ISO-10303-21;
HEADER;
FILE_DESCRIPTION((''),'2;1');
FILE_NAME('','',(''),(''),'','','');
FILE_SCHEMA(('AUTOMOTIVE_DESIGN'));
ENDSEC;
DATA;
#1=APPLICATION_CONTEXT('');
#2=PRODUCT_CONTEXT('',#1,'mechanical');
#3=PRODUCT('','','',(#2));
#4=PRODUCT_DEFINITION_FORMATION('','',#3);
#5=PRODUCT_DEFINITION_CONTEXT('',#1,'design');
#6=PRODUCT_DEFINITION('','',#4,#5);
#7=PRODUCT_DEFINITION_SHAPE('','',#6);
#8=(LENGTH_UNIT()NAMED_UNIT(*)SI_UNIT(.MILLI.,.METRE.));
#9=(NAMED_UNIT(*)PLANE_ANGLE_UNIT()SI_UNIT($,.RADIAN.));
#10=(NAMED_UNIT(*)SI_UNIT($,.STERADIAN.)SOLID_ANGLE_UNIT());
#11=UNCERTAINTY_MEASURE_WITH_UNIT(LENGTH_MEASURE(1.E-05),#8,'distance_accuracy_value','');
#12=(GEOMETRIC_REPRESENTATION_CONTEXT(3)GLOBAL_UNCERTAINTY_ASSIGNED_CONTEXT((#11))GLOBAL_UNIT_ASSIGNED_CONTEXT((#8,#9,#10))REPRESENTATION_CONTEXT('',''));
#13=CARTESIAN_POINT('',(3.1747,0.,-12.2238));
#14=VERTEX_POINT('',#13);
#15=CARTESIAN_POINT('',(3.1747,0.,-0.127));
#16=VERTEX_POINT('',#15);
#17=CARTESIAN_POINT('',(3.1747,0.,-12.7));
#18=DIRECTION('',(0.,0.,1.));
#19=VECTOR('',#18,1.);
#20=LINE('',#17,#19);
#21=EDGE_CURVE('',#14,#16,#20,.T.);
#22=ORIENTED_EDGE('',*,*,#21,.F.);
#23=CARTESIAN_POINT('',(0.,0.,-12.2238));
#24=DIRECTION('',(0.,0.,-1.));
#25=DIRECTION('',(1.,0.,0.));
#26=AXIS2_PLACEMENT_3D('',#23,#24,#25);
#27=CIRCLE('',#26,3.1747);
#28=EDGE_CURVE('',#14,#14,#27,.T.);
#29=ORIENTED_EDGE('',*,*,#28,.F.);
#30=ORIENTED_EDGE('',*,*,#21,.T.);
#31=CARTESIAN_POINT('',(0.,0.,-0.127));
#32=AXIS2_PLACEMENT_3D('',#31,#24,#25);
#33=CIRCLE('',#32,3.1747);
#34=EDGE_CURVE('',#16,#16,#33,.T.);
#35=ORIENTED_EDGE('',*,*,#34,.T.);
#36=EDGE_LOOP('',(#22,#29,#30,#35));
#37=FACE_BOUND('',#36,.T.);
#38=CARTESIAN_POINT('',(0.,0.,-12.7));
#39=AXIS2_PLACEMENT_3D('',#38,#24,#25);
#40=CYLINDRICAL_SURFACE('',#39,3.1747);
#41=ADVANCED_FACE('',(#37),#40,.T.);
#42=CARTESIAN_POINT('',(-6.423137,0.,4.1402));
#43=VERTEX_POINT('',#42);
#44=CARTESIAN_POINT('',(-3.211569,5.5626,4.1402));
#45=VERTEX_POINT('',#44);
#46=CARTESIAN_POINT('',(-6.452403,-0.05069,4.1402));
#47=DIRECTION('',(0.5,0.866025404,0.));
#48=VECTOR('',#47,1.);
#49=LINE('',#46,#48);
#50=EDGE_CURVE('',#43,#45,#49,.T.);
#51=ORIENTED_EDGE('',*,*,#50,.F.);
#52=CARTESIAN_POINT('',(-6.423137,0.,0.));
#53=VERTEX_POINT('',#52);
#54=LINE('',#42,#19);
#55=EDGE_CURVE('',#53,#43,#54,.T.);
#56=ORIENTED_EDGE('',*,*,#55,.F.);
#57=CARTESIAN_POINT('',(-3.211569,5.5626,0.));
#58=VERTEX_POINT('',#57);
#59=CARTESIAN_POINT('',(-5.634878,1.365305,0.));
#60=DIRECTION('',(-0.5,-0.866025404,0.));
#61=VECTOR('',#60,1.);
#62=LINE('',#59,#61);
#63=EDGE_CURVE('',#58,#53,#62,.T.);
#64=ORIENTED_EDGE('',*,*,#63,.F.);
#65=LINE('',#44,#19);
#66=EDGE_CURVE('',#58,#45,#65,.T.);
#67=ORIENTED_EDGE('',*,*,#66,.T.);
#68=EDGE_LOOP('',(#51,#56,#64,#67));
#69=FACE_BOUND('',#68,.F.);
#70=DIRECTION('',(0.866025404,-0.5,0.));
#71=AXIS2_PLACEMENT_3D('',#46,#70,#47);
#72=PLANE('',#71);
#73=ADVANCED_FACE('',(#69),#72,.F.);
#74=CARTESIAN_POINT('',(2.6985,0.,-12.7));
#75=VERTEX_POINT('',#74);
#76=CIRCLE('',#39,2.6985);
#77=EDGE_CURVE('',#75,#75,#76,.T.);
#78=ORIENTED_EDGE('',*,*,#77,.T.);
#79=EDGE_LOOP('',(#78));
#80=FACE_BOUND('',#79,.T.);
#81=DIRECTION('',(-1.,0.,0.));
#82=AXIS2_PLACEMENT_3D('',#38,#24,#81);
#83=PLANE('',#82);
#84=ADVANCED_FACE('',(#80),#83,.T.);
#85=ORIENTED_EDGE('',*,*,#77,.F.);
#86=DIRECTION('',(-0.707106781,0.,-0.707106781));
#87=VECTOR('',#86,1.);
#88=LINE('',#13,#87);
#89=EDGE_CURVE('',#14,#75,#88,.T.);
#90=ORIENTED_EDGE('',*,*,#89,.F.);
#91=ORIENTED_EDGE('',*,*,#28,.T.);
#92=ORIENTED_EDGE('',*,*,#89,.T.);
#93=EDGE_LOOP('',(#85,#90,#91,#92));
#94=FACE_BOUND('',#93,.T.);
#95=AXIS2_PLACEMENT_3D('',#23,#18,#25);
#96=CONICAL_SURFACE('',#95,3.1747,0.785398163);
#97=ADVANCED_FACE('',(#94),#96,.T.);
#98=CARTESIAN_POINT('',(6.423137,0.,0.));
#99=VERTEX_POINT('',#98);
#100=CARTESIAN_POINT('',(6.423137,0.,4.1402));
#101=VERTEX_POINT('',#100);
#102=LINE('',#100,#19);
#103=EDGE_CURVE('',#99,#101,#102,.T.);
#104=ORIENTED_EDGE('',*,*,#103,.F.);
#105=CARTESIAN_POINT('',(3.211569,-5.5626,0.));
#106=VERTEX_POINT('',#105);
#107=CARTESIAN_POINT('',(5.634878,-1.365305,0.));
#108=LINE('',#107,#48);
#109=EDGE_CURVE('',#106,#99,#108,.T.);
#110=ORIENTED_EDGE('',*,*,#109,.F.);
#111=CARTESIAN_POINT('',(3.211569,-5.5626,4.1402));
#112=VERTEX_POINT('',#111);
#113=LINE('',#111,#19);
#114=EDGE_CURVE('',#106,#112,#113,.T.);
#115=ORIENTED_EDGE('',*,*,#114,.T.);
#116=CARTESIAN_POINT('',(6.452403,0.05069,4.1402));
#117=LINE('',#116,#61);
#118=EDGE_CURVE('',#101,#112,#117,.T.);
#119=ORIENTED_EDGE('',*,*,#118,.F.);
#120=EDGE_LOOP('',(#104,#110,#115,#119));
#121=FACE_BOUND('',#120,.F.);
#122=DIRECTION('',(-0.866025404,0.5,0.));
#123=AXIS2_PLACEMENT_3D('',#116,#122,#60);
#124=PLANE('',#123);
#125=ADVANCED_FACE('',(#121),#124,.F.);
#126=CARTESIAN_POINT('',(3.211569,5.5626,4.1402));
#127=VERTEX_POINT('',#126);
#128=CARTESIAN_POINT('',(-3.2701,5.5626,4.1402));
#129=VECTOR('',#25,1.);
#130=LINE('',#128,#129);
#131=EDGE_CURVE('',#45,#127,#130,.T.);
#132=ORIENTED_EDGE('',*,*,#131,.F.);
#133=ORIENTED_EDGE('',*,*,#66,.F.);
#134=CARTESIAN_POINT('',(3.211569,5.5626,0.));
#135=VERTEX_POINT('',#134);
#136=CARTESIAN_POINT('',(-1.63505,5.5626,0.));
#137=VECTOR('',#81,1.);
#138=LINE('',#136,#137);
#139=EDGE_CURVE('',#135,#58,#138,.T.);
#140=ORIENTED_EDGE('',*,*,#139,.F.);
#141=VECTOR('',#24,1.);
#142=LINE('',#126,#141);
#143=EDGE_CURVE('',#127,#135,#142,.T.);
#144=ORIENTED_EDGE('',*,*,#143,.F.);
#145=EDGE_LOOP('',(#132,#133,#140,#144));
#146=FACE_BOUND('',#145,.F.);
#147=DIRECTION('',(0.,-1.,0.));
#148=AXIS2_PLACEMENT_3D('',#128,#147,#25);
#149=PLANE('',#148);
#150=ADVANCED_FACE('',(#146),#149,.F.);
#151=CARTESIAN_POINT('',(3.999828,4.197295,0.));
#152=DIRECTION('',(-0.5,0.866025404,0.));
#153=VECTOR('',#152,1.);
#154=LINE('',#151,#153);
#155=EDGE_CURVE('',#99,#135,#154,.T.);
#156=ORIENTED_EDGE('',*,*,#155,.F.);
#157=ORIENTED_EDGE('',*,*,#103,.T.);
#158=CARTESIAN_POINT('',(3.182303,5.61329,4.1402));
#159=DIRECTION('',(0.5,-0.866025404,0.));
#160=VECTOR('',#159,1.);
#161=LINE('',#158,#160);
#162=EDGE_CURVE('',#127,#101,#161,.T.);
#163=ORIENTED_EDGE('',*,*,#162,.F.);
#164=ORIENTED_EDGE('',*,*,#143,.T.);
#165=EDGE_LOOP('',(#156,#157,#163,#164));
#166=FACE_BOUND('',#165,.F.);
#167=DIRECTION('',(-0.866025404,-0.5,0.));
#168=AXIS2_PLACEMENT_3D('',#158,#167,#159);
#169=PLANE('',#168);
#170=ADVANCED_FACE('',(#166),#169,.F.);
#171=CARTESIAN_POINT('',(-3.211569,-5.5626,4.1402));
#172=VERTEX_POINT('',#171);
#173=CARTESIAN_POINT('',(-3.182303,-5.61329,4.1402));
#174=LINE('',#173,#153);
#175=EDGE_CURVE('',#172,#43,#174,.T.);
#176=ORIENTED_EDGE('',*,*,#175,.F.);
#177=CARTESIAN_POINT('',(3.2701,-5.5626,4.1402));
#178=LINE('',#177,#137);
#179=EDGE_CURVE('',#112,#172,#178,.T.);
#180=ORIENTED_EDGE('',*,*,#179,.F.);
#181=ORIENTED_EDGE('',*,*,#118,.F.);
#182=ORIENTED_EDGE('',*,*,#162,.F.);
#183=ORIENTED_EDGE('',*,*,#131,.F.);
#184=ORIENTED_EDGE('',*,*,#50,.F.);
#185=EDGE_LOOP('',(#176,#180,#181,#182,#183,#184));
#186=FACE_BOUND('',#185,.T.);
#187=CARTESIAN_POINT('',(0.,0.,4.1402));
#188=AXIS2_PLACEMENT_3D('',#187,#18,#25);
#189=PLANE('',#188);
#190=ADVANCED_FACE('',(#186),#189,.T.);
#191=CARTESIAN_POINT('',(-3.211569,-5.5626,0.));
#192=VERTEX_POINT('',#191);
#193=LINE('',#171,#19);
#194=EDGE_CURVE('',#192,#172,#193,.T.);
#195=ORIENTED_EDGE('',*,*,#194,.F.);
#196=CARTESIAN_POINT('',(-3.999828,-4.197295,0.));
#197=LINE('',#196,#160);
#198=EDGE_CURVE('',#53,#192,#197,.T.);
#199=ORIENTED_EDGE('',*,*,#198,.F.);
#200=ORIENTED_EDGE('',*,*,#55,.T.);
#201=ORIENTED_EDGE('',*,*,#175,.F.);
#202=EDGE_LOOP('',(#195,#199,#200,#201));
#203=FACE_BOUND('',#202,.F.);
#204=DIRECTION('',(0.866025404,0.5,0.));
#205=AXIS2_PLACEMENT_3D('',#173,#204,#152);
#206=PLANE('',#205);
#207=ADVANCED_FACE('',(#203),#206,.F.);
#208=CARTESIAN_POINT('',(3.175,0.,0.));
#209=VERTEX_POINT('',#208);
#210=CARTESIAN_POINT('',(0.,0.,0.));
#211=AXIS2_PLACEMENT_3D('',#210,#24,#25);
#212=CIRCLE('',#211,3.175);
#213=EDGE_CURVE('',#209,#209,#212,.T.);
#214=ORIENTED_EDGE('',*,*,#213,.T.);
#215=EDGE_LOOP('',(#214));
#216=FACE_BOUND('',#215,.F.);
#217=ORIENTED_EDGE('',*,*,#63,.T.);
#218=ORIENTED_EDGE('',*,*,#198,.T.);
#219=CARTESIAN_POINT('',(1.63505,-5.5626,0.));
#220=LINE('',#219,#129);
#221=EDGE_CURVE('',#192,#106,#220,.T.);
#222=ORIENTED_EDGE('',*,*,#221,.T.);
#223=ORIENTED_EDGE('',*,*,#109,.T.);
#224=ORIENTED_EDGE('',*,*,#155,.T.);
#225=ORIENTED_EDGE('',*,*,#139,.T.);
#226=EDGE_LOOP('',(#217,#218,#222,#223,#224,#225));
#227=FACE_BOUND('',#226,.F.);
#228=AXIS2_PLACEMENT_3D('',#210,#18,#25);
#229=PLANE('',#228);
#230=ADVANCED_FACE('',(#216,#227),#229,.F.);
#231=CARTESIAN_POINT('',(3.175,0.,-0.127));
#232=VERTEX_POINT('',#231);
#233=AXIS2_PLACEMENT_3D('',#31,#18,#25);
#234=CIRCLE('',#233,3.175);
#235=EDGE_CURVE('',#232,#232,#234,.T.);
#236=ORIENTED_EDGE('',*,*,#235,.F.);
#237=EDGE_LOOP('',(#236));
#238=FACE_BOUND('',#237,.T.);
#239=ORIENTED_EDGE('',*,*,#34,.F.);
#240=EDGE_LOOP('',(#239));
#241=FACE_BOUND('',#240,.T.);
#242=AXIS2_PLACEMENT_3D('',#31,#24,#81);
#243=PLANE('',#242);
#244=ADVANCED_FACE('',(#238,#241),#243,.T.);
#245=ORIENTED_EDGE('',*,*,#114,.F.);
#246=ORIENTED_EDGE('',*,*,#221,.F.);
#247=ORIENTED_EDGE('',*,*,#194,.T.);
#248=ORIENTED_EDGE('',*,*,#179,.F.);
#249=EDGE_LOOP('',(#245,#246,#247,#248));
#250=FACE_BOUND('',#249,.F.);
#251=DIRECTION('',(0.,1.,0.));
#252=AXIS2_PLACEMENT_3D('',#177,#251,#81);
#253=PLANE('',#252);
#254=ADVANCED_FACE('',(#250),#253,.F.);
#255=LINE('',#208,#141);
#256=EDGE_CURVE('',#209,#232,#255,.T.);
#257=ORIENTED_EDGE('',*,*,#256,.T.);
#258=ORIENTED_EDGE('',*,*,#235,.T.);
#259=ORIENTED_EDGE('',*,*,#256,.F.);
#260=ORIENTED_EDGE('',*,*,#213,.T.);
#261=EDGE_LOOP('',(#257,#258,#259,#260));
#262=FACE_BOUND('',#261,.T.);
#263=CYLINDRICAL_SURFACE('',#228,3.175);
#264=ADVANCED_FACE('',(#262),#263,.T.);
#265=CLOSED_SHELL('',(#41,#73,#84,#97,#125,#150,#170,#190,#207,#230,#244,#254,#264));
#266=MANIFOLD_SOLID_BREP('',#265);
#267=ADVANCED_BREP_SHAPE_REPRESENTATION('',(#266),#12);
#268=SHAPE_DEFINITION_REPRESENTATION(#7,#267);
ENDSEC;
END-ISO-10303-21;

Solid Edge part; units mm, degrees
sketch "Sketch1" plane through (0, 0, 0) normal (0, 0, 1) x (1, 0, 0)
  circle A0 centre (0, 0) radius 6.4526
  dimension "D1" = 12.9052
extrude "Protrusion1" add sketch "Sketch1" along normal blind 4.1402
sketch "Sketch2" plane through (0, 0, 0) normal (0, 0, -1) x (1, 0, 0)
  circle A0 centre (0, 0) radius 3.175
extrude "Protrusion2" add sketch "Sketch2" along normal blind 12.7
sketch "Sketch3" plane through (0, 0, -12.7) normal (0, 0, -1) x (1, 0, 0)
  circle A0 centre (0, 0) radius 3.1747
extrude "Cutout1" cut sketch "Sketch3" against normal blind 12.573 flip side to cut
chamfer "Chamfer_1" distance 0.4762 angle 45 1 edges at (-3.1747, 0, -12.7)
sketch "Sketch4" plane through (0, 0, 4.1402) normal (0, 0, 1) x (1, 0, 0)
  line L0 (-3.2701, 5.5626) -> (3.2701, 5.5626)
  dimension "D1" = 11.1252
extrude "Cutout2" cut sketch "Sketch4" against normal up to next material side at (0, 5.6126, 4.1402)
pattern_circular "Pattern1" count 6 over 360 about axis through (0, 0, 4.1402) along (0, 0, 1) of "Cutout2"
properties part number "24100157"
